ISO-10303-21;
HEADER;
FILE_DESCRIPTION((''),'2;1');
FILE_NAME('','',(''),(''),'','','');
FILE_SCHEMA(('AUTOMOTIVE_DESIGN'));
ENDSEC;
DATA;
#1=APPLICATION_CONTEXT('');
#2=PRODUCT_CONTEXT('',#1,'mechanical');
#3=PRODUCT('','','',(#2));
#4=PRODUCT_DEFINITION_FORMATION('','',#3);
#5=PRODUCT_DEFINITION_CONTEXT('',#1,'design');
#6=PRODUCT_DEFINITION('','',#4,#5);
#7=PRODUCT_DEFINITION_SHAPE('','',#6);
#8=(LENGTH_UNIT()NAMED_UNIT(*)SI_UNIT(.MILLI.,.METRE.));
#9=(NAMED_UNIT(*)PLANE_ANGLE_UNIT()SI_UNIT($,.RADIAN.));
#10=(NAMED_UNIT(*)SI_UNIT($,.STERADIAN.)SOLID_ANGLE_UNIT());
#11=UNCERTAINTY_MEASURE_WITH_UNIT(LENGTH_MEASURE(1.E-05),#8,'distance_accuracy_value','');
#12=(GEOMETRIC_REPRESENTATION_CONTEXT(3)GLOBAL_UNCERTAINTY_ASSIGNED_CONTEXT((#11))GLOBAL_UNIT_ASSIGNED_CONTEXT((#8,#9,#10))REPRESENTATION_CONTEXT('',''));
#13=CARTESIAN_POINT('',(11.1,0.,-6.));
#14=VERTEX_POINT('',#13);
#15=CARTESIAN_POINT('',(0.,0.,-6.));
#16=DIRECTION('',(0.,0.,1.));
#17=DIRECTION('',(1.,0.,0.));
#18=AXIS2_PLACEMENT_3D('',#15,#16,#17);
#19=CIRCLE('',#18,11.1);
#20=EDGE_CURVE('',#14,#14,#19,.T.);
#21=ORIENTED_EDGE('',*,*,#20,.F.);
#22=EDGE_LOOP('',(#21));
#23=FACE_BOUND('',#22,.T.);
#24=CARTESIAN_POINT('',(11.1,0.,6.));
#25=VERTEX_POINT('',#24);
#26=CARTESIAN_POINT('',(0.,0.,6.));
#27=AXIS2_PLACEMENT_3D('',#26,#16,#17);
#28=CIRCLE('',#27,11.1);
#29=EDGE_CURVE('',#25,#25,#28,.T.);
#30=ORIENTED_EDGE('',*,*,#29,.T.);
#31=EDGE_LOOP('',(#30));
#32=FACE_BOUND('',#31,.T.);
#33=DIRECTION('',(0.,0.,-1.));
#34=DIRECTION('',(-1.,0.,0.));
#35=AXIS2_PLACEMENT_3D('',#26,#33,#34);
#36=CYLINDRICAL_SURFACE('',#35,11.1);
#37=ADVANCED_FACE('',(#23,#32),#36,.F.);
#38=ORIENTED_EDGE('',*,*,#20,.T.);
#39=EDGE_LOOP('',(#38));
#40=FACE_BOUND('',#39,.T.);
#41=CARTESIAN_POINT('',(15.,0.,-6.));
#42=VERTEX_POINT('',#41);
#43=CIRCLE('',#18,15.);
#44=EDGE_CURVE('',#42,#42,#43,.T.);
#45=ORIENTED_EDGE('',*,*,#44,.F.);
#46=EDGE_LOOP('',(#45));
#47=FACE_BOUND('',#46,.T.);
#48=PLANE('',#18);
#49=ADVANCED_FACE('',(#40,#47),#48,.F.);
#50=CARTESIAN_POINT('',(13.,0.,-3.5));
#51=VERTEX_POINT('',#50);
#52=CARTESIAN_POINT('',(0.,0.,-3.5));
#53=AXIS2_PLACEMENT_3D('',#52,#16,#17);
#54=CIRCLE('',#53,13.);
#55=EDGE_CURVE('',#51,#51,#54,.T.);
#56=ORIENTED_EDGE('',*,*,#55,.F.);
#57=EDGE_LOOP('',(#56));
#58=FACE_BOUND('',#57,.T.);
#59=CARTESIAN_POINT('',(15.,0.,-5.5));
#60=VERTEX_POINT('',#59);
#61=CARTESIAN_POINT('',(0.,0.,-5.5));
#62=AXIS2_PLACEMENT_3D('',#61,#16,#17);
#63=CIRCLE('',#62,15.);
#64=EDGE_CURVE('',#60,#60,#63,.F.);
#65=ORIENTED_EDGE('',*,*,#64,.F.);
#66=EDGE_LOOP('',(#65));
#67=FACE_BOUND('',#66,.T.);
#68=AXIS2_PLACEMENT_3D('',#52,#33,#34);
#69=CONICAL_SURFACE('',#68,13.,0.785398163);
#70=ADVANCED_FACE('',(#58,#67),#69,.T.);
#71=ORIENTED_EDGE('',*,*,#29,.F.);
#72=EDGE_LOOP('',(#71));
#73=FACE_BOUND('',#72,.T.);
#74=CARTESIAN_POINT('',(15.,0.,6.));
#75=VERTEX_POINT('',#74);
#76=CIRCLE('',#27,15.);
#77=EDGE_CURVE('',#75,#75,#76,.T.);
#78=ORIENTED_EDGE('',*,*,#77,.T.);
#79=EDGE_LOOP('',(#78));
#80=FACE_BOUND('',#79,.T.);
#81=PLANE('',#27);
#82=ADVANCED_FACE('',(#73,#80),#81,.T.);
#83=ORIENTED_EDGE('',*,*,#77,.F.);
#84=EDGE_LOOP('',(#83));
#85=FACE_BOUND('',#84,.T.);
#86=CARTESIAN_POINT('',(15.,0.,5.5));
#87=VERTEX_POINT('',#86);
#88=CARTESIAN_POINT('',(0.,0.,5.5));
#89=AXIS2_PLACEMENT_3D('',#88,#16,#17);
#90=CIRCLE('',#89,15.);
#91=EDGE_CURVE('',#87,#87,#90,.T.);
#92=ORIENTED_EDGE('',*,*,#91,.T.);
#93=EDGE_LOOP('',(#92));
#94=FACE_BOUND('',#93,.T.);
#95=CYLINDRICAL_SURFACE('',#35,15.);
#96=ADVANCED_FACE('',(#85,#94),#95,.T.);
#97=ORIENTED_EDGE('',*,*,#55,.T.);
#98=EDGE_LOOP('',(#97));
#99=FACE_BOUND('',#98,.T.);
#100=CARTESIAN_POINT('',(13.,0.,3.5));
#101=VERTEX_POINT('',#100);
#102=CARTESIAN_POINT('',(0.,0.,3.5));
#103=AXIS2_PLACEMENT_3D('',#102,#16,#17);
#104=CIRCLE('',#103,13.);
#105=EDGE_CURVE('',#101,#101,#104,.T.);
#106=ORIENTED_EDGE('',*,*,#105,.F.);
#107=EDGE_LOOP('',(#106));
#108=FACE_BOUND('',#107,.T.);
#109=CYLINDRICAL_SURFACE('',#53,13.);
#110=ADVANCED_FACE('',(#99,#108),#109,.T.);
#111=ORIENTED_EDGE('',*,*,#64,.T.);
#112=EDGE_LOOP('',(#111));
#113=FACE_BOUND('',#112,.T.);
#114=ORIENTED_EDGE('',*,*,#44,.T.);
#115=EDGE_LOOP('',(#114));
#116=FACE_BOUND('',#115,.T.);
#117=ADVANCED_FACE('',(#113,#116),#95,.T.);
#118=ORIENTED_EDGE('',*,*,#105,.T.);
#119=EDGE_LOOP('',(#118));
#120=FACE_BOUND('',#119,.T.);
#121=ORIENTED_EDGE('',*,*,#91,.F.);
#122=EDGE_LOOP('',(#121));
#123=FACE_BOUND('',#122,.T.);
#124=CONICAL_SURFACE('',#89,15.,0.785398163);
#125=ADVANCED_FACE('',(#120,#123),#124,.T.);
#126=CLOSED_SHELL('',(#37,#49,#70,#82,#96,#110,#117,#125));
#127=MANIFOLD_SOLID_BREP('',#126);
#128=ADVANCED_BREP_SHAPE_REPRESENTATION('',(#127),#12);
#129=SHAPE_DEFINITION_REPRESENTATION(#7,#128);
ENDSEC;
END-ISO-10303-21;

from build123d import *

# Parameters (mm, degrees)
SKETCH1_R           = 15
SKETCH1_R_2         = 13
SKETCH1_R_3         = 11.1
BOSS_EXTRUDE1_DEPTH = 6
SKETCH1_3_R         = 15
SKETCH1_3_R_2       = 13
CUT_EXTRUDE1_DEPTH  = 3.5
CHAMFER1_SIZE       = 2


with BuildPart() as part:
    # Sketch1 → Boss-Extrude1 (new, symmetric)
    # profile 1 of 2: a face of its own
    with BuildSketch(Plane.XY):
        Circle(SKETCH1_R)
        Circle(SKETCH1_R_2, mode=Mode.SUBTRACT)
    # profile 2 of 2: a face of its own
    with BuildSketch(Plane.XY):
        Circle(SKETCH1_R_2)
        Circle(SKETCH1_R_3, mode=Mode.SUBTRACT)
    extrude(amount=BOSS_EXTRUDE1_DEPTH, both=True)

    # Sketch1<3> → Cut-Extrude1 (cut, symmetric)
    with BuildSketch(Plane.XY):
        Circle(SKETCH1_3_R)
        Circle(SKETCH1_3_R_2, mode=Mode.SUBTRACT)
    extrude(amount=CUT_EXTRUDE1_DEPTH, both=True, mode=Mode.SUBTRACT)

    # Chamfer1
    chamfer1_edges = [part.edges().sort_by_distance(p)[0] for p in [
        (-15, 0, -3.5),
        (-15, 0, 3.5),
    ]]
    chamfer(chamfer1_edges, length=CHAMFER1_SIZE - 0.0001)  # a hair under: the kernel refuses the full size


solid = part.part
